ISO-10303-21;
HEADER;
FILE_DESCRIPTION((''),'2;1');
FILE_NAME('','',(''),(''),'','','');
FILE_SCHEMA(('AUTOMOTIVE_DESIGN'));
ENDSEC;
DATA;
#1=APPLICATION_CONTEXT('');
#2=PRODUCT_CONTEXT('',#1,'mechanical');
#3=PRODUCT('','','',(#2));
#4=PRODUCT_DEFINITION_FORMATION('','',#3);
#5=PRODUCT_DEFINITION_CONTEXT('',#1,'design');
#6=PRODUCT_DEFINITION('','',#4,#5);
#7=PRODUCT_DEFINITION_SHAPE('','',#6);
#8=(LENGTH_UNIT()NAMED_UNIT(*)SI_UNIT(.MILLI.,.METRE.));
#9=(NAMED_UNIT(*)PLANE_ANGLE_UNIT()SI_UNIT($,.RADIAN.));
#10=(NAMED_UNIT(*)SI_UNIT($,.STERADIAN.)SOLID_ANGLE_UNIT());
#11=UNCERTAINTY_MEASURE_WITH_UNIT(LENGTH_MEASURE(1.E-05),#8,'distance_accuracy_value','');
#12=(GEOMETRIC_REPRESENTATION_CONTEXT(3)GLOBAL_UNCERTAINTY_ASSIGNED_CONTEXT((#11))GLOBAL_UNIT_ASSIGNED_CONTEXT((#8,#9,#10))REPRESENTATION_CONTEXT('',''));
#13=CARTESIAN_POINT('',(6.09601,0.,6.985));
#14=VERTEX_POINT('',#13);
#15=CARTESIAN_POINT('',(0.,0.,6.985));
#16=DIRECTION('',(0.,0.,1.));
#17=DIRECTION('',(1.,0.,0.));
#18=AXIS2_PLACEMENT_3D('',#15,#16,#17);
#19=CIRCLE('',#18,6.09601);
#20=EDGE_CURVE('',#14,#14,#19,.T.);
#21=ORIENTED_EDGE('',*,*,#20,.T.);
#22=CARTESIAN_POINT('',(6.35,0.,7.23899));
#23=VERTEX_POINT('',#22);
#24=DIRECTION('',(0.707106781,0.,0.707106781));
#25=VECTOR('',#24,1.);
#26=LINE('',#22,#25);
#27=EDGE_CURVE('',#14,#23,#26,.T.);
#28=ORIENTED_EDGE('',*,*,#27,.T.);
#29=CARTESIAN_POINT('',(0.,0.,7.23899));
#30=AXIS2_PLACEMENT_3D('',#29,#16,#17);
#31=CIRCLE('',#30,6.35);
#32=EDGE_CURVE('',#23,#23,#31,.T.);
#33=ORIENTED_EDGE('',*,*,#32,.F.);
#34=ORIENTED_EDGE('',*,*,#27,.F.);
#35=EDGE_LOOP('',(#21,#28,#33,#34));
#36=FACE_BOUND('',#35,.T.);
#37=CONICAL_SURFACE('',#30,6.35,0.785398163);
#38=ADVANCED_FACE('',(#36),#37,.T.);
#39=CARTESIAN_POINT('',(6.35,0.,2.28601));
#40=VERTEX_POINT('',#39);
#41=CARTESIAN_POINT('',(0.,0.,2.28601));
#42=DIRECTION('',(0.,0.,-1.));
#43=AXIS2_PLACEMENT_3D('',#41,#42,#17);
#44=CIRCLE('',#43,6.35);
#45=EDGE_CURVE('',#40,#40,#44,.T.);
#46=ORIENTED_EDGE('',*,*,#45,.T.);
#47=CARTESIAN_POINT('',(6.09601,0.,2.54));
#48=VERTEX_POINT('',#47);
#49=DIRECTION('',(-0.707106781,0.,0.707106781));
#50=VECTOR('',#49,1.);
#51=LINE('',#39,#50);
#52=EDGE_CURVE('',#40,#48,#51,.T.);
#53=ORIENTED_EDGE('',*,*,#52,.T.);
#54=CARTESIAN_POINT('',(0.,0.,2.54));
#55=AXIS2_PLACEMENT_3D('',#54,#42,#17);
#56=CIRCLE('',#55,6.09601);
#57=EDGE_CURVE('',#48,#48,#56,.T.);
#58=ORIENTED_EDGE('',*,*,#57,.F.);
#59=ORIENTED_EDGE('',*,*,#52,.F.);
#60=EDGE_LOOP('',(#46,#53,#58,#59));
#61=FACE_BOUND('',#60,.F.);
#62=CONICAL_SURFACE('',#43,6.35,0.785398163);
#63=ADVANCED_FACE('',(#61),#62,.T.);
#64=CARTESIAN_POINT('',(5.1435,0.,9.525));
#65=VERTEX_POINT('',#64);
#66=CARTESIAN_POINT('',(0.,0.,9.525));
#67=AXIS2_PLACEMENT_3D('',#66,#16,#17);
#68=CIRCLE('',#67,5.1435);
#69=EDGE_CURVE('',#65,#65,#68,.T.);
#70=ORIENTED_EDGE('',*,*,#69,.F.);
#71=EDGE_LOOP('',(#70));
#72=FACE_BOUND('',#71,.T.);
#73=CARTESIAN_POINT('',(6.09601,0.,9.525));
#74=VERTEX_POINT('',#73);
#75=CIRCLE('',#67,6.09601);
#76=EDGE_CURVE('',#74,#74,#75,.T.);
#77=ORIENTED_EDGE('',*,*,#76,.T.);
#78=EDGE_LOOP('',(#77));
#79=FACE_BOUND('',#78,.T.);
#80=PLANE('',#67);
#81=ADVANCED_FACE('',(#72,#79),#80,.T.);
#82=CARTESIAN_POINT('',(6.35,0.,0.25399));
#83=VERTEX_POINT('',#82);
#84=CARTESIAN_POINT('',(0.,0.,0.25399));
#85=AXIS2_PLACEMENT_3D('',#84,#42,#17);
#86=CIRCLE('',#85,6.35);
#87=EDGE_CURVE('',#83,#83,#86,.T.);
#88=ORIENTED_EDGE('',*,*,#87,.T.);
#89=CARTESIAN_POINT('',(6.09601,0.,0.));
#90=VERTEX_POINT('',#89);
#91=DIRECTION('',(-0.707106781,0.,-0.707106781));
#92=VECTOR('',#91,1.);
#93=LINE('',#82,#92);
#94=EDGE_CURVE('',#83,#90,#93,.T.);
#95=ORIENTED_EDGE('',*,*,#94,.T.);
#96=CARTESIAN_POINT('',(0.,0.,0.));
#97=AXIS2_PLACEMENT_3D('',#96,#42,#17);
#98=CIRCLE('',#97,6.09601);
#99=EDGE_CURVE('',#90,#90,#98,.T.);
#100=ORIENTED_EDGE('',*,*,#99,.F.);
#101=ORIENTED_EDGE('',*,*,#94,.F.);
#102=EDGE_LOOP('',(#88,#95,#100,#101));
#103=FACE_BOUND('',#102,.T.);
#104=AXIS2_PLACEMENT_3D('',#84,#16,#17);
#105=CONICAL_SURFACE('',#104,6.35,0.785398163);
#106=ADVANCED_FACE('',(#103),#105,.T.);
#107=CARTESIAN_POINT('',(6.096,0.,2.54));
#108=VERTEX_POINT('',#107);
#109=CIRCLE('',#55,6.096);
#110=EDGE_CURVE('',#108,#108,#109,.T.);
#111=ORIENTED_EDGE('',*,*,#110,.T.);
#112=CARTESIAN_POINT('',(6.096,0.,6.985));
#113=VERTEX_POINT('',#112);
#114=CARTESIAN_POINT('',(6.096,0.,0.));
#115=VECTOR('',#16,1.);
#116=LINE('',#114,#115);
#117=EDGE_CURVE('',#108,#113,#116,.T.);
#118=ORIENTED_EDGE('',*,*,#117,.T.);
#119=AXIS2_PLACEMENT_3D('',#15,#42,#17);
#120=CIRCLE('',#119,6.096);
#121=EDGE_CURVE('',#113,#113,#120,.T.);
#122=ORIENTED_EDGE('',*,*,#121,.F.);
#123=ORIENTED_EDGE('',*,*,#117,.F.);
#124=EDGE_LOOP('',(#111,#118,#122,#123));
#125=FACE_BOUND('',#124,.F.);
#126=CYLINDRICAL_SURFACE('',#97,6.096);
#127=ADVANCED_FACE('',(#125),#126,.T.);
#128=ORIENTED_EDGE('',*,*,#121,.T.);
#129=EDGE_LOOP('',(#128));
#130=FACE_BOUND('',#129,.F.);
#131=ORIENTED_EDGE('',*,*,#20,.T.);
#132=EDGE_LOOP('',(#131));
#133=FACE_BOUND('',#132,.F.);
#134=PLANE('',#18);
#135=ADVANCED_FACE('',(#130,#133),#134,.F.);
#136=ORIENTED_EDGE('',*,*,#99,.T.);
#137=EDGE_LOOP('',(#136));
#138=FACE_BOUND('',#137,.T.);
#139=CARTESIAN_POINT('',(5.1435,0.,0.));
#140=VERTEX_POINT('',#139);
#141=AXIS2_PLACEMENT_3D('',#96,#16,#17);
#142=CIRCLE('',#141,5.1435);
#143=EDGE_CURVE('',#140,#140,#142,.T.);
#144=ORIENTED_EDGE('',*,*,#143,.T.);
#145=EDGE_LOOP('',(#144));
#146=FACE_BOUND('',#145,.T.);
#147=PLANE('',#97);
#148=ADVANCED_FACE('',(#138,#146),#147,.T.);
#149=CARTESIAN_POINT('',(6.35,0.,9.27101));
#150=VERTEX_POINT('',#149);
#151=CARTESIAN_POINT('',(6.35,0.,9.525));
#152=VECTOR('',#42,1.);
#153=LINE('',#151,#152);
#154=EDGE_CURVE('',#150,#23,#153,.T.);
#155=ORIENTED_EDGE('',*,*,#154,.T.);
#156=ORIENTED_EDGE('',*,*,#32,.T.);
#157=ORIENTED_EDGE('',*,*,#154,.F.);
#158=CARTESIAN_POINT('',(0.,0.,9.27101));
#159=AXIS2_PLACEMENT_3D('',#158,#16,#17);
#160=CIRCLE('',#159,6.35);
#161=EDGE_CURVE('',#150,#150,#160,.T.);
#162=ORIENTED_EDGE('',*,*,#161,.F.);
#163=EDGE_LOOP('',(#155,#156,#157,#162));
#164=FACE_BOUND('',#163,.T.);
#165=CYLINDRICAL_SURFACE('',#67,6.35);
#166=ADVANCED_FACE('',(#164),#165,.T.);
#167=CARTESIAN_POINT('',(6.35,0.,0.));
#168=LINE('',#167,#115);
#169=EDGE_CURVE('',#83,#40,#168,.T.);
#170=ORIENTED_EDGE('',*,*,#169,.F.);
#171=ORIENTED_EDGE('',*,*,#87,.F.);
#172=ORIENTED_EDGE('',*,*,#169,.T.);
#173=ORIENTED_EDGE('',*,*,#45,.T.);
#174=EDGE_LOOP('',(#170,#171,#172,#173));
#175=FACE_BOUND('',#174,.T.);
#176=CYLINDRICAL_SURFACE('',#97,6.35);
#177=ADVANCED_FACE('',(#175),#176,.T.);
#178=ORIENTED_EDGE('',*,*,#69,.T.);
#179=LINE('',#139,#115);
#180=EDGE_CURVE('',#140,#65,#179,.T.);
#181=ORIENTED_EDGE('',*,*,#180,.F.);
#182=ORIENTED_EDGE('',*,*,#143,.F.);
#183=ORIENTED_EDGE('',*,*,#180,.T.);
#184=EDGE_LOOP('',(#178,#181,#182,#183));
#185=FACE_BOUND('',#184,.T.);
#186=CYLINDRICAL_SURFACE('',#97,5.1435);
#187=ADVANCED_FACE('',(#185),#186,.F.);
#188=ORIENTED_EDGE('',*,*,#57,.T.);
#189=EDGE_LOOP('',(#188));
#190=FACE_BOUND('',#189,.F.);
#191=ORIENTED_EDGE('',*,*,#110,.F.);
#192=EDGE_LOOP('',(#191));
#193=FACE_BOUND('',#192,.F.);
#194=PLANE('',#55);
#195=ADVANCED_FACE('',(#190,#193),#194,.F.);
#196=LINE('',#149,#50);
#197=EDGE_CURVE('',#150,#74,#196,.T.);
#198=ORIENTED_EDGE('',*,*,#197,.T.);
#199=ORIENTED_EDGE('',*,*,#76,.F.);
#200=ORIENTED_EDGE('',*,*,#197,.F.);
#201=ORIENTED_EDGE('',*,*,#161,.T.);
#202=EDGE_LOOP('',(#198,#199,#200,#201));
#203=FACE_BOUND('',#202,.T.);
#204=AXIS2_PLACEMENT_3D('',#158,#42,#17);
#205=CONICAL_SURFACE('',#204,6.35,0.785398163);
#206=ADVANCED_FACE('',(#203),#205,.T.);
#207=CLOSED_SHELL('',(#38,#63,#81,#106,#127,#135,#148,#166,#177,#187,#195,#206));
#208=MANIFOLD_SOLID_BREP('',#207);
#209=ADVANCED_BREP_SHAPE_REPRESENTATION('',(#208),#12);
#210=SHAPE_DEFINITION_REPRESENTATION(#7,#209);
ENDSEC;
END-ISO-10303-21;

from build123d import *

# Parameters (mm, degrees)
F0_R     = 6.096
F0_R_2   = 5.1435
F1_DEPTH = 9.525
F2_R     = 6.35
F2_R_2   = 5.1435
F3_DEPTH = 2.54
F4_R     = 6.35
F4_R_2   = 5.1435
F5_DEPTH = 2.54
F6_SIZE  = 0.25399


# Not quite as in the source:
# - a fillet or chamfer is up to 0.001 mm smaller than in the source, because OpenCascade refuses the exact size


with BuildPart() as f1:
    # F0 (on Top) → F1 (new body)
    with BuildSketch(Plane.XY):
        Circle(F0_R)
        Circle(F0_R_2, mode=Mode.SUBTRACT)
    extrude(amount=F1_DEPTH)

    # F2 (on face) → F3 (join)
    with BuildSketch(Plane.XY.offset(9.525)):
        Circle(F2_R)
        Circle(F2_R_2, mode=Mode.SUBTRACT)
    extrude(amount=-F3_DEPTH)

    # F4 (on face) → F5 (join)
    with BuildSketch(Plane(origin=(0, 0, 0), x_dir=(1, 0, 0), z_dir=(0, 0, -1))):
        Circle(F4_R)
        Circle(F4_R_2, mode=Mode.SUBTRACT)
    extrude(amount=-F5_DEPTH)

    # F6 (size 0.254 in the source; OpenCascade refuses exactly that, so slightly less here)
    f6_edges = [f1.edges().sort_by_distance(p)[0] for p in [
        (-6.35, 0, 6.985),
        (-6.35, 0, 9.525),
        (-6.35, 0, 2.54),
        (-6.35, 0, 0),
    ]]
    chamfer(f6_edges, length=F6_SIZE)


solid = f1.part
